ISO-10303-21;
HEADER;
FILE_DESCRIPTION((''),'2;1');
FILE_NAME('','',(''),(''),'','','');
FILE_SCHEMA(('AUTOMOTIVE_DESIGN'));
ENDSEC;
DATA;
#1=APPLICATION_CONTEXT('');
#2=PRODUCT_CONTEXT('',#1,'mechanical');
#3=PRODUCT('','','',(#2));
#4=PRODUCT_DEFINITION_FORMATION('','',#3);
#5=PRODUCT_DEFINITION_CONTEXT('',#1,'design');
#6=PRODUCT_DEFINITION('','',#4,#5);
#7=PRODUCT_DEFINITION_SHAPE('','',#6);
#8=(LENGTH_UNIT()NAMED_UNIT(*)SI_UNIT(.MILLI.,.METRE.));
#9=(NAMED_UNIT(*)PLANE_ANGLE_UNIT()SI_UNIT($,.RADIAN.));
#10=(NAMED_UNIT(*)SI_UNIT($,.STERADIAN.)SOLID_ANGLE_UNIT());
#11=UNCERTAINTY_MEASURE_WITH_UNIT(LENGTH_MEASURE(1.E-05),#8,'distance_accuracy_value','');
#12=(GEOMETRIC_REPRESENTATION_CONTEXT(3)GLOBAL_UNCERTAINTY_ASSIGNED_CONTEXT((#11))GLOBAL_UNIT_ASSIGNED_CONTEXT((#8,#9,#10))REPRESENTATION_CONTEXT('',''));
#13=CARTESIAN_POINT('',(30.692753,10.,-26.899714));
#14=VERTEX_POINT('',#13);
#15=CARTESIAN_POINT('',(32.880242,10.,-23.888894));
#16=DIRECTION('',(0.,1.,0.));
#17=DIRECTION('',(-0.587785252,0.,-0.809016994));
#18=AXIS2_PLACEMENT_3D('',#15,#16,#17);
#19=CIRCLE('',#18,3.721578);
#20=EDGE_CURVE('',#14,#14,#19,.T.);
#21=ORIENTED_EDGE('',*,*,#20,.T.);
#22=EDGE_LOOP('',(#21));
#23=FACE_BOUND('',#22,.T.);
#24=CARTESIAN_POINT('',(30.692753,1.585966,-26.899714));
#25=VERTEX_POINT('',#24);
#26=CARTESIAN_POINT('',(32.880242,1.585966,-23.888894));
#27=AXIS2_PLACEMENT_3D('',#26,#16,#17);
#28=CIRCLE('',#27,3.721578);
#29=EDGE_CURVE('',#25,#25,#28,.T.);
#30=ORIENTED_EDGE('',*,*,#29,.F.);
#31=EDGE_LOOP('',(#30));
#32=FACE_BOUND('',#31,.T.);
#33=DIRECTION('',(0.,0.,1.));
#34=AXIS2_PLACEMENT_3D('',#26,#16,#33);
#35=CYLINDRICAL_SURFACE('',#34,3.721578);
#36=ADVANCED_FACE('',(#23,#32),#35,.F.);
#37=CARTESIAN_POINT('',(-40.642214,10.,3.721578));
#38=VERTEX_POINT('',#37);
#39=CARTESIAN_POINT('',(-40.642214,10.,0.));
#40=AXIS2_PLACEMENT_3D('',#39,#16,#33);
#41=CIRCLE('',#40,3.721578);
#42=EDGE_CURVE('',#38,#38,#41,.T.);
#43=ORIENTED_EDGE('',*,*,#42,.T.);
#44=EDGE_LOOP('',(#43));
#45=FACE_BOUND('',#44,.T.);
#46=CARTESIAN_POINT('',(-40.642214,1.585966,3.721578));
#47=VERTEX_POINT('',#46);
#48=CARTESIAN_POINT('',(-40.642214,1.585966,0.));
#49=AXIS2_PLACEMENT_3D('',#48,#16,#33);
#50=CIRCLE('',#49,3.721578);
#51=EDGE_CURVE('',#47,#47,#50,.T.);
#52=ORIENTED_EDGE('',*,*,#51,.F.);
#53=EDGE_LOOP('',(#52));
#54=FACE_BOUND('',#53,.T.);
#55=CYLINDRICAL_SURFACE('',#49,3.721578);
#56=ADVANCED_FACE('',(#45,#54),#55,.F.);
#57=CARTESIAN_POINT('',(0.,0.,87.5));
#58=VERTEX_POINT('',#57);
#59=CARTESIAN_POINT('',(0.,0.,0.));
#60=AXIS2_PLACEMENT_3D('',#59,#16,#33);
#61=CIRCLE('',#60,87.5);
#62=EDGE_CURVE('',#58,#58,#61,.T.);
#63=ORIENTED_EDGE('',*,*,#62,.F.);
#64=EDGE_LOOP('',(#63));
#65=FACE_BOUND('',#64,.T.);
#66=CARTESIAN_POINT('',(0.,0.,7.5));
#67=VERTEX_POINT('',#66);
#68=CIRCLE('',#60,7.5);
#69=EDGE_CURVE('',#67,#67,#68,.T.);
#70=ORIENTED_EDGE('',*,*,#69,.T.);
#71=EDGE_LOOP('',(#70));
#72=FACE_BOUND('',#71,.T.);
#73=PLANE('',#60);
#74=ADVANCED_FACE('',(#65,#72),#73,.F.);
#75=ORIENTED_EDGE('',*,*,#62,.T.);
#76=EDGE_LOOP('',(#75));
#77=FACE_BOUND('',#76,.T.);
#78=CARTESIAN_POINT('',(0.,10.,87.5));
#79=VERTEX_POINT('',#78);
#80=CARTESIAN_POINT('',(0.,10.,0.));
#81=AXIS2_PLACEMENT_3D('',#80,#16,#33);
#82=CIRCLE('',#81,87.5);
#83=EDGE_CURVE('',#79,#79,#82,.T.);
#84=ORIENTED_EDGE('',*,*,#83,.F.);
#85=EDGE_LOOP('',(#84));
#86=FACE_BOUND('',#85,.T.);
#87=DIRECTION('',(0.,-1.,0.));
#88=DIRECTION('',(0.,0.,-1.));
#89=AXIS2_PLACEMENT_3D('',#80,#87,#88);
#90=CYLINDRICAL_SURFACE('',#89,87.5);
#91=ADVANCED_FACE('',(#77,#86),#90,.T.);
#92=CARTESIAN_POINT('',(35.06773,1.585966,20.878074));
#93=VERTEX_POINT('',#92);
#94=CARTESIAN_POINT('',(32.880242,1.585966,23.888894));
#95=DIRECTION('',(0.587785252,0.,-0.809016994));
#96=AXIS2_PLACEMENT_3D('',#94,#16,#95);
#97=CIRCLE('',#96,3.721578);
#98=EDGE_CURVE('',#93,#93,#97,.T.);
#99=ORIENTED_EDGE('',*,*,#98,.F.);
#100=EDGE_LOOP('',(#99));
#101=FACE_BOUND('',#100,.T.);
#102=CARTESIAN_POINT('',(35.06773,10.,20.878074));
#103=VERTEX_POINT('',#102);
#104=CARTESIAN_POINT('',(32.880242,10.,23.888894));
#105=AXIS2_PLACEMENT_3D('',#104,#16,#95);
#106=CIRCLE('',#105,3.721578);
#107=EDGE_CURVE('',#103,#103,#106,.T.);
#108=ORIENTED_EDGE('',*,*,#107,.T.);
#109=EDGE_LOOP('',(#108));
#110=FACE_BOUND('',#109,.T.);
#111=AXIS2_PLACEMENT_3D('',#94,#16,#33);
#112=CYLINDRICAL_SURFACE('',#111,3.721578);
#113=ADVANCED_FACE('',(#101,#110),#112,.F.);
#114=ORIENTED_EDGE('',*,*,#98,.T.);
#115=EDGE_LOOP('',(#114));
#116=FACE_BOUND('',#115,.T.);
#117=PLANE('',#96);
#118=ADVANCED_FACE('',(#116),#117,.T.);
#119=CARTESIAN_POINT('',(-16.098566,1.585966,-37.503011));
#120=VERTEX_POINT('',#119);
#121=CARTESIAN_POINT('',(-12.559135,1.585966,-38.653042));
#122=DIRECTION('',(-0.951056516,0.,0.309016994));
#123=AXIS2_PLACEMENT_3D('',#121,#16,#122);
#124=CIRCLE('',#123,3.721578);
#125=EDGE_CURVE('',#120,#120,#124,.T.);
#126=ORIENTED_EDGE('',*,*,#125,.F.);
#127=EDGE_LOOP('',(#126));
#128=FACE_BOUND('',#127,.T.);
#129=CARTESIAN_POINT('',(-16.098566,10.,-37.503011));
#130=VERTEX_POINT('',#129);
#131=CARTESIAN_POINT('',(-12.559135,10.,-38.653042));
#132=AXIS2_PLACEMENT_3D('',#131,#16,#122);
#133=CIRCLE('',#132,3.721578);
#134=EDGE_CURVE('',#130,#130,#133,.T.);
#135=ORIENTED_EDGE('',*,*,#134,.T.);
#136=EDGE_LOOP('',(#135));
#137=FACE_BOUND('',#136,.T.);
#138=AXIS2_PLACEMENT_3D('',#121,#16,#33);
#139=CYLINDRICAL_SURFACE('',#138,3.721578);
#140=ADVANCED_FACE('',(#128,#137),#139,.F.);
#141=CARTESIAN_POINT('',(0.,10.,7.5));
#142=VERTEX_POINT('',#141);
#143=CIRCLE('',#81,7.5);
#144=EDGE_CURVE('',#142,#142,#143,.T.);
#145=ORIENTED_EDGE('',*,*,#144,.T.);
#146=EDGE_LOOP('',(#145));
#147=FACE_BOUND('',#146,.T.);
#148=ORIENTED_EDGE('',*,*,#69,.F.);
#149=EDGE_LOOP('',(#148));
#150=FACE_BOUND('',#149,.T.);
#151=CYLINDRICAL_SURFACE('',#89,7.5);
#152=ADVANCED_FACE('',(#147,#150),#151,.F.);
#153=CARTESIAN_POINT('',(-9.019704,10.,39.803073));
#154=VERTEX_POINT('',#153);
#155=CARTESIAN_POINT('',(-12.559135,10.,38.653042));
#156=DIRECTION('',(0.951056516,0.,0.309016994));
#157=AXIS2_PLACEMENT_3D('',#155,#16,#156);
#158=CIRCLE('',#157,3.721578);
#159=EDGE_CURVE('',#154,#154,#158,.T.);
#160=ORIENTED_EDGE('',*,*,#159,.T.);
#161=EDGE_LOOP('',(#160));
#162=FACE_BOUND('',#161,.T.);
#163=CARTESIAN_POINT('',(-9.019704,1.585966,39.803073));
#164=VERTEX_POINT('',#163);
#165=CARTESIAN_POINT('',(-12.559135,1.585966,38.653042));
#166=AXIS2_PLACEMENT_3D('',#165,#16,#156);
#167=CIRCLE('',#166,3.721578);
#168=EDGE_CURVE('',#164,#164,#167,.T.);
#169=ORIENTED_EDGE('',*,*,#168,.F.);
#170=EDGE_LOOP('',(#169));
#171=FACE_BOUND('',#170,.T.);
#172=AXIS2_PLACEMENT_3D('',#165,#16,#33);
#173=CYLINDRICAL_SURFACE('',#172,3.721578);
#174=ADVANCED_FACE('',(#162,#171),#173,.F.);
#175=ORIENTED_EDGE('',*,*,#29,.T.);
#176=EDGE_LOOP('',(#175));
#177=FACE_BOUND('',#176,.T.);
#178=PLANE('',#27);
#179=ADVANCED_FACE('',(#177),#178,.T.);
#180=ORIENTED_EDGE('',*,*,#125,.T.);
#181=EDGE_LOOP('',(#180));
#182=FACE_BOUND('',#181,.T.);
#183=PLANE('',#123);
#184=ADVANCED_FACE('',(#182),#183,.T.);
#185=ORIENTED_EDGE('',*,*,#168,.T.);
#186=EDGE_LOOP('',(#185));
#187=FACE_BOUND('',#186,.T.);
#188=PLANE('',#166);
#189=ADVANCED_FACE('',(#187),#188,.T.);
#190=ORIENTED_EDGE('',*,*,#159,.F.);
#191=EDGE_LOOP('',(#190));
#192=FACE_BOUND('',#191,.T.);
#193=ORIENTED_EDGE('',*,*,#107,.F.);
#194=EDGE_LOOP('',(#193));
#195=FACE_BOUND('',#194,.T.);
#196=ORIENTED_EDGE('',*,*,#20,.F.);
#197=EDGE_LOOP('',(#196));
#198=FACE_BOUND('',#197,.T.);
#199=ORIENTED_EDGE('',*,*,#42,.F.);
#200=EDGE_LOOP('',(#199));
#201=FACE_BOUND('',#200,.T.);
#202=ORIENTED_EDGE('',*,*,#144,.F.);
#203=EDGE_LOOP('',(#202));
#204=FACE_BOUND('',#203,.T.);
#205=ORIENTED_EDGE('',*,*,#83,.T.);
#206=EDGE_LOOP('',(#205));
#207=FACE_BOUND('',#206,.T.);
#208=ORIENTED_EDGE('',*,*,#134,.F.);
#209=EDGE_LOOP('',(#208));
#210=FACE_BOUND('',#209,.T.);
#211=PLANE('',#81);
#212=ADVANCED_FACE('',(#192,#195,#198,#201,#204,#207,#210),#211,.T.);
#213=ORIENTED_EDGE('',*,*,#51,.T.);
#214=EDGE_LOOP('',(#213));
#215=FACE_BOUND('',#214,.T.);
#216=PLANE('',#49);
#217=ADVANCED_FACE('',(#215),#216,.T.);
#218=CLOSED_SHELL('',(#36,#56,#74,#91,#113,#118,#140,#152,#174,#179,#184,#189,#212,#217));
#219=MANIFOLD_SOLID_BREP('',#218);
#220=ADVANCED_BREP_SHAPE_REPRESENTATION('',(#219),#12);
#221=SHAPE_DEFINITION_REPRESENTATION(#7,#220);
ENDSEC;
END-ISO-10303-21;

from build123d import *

# Parameters (mm, degrees)
SKETCH1_R           = 87.5
BOSS_EXTRUDE1_DEPTH = 10
SKETCH2_R           = 7.5
CUT_EXTRUDE1_DEPTH  = 125.147090179
SKETCH3_R           = 3.721577815
CUT_EXTRUDE2_DEPTH  = 8.414033674
CIRPATTERN1_COUNT   = 5


with BuildPart() as part:
    # Sketch1 → Boss-Extrude1 (new body)
    with BuildSketch(Plane(origin=(0, 0, 0), x_dir=(1, 0, 0), z_dir=(0, 1, 0))):
        Circle(SKETCH1_R)
    extrude(amount=BOSS_EXTRUDE1_DEPTH)

    # Sketch2 → Cut-Extrude1 (cut, through all)
    with BuildSketch(Plane(origin=(0, 0, 0), x_dir=(1, 0, 0), z_dir=(0, 1, 0))):
        Circle(SKETCH2_R)
    extrude(amount=CUT_EXTRUDE1_DEPTH, mode=Mode.SUBTRACT)

    # Sketch3 → Cut-Extrude2 (cut)
    with BuildSketch(Plane(origin=(0, 10, 0), x_dir=(1, 0, 0), z_dir=(0, 1, 0))):
        with Locations((-40.642213715, 0)):
            Circle(SKETCH3_R)
    cut_extrude2 = extrude(amount=-CUT_EXTRUDE2_DEPTH, mode=Mode.SUBTRACT)

    # CirPattern1: Cut-Extrude2 ×5 about axis
    cirpattern1_axis = Axis((0, 0, 0), (0, 1, 0))
    for i in range(1, CIRPATTERN1_COUNT):
        add(cut_extrude2.rotate(cirpattern1_axis, i * 360 / CIRPATTERN1_COUNT), mode=Mode.SUBTRACT)


solid = part.part
